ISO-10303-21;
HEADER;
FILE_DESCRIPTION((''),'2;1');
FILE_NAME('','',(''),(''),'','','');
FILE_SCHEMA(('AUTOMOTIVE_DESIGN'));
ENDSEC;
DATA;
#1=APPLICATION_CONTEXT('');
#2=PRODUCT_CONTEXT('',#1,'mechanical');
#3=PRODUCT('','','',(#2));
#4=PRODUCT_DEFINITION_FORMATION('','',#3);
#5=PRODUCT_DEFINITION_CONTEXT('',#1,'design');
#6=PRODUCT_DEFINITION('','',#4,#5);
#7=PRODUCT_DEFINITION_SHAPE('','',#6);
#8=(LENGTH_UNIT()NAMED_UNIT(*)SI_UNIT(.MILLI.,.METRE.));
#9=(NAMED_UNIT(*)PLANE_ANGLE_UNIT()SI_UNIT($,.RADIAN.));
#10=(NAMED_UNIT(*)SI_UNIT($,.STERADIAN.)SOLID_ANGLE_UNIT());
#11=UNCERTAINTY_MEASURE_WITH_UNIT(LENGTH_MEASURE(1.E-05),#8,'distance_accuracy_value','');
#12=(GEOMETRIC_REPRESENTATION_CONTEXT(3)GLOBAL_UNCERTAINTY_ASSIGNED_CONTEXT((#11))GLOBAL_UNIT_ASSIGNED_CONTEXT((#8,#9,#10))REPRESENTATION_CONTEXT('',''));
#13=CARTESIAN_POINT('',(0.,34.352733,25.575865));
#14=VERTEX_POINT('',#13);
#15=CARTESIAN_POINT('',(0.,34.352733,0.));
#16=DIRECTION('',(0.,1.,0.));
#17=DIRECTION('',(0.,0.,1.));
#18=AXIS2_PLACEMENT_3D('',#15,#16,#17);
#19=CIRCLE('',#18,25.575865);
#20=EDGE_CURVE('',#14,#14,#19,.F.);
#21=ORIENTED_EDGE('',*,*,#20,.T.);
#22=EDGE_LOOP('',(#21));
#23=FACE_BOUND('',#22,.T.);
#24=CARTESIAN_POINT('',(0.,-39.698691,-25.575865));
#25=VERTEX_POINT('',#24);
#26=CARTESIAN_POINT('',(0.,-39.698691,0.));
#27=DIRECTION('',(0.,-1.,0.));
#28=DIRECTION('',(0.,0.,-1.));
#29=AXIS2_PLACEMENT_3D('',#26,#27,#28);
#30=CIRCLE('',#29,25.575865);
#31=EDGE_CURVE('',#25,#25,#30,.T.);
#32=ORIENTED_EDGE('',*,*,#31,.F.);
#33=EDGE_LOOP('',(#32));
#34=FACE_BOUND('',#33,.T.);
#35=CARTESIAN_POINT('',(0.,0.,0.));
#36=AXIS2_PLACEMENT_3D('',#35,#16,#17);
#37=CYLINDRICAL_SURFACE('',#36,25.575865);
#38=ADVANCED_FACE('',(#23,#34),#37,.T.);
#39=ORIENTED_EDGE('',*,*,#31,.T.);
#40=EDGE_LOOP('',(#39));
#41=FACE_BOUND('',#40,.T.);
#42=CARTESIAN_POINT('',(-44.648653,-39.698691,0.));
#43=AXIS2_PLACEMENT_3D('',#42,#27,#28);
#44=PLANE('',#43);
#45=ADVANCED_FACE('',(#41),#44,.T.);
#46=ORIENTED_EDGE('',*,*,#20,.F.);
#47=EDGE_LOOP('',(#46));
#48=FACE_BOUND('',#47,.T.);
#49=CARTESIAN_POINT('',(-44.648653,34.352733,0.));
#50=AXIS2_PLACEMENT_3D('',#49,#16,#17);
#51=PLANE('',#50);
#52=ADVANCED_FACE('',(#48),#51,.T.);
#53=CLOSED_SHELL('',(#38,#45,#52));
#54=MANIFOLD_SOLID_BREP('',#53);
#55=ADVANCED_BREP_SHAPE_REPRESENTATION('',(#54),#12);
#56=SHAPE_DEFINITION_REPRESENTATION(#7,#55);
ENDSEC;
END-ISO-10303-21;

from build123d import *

# Parameters (mm, degrees)
OFFICIAL_SURFACE_TRIM_START     = -39.698691123
OFFICIAL_SURFACE_TRIM_OUTLINE_R = 25.575864924
OFFICIAL_SURFACE_TRIM_DEPTH     = 74.051423841


# Read off the part's stored shape, not the designer's step: official_surface_trim
with BuildPart() as part:
    # official_surface_trim outline → official_surface_trim (new body)
    with BuildSketch(Plane(origin=(0, 0, 0), x_dir=(1, 0, 0), z_dir=(0, 1, 0)).offset(OFFICIAL_SURFACE_TRIM_START)):
        Circle(OFFICIAL_SURFACE_TRIM_OUTLINE_R)
    extrude(amount=OFFICIAL_SURFACE_TRIM_DEPTH)


solid = part.part
